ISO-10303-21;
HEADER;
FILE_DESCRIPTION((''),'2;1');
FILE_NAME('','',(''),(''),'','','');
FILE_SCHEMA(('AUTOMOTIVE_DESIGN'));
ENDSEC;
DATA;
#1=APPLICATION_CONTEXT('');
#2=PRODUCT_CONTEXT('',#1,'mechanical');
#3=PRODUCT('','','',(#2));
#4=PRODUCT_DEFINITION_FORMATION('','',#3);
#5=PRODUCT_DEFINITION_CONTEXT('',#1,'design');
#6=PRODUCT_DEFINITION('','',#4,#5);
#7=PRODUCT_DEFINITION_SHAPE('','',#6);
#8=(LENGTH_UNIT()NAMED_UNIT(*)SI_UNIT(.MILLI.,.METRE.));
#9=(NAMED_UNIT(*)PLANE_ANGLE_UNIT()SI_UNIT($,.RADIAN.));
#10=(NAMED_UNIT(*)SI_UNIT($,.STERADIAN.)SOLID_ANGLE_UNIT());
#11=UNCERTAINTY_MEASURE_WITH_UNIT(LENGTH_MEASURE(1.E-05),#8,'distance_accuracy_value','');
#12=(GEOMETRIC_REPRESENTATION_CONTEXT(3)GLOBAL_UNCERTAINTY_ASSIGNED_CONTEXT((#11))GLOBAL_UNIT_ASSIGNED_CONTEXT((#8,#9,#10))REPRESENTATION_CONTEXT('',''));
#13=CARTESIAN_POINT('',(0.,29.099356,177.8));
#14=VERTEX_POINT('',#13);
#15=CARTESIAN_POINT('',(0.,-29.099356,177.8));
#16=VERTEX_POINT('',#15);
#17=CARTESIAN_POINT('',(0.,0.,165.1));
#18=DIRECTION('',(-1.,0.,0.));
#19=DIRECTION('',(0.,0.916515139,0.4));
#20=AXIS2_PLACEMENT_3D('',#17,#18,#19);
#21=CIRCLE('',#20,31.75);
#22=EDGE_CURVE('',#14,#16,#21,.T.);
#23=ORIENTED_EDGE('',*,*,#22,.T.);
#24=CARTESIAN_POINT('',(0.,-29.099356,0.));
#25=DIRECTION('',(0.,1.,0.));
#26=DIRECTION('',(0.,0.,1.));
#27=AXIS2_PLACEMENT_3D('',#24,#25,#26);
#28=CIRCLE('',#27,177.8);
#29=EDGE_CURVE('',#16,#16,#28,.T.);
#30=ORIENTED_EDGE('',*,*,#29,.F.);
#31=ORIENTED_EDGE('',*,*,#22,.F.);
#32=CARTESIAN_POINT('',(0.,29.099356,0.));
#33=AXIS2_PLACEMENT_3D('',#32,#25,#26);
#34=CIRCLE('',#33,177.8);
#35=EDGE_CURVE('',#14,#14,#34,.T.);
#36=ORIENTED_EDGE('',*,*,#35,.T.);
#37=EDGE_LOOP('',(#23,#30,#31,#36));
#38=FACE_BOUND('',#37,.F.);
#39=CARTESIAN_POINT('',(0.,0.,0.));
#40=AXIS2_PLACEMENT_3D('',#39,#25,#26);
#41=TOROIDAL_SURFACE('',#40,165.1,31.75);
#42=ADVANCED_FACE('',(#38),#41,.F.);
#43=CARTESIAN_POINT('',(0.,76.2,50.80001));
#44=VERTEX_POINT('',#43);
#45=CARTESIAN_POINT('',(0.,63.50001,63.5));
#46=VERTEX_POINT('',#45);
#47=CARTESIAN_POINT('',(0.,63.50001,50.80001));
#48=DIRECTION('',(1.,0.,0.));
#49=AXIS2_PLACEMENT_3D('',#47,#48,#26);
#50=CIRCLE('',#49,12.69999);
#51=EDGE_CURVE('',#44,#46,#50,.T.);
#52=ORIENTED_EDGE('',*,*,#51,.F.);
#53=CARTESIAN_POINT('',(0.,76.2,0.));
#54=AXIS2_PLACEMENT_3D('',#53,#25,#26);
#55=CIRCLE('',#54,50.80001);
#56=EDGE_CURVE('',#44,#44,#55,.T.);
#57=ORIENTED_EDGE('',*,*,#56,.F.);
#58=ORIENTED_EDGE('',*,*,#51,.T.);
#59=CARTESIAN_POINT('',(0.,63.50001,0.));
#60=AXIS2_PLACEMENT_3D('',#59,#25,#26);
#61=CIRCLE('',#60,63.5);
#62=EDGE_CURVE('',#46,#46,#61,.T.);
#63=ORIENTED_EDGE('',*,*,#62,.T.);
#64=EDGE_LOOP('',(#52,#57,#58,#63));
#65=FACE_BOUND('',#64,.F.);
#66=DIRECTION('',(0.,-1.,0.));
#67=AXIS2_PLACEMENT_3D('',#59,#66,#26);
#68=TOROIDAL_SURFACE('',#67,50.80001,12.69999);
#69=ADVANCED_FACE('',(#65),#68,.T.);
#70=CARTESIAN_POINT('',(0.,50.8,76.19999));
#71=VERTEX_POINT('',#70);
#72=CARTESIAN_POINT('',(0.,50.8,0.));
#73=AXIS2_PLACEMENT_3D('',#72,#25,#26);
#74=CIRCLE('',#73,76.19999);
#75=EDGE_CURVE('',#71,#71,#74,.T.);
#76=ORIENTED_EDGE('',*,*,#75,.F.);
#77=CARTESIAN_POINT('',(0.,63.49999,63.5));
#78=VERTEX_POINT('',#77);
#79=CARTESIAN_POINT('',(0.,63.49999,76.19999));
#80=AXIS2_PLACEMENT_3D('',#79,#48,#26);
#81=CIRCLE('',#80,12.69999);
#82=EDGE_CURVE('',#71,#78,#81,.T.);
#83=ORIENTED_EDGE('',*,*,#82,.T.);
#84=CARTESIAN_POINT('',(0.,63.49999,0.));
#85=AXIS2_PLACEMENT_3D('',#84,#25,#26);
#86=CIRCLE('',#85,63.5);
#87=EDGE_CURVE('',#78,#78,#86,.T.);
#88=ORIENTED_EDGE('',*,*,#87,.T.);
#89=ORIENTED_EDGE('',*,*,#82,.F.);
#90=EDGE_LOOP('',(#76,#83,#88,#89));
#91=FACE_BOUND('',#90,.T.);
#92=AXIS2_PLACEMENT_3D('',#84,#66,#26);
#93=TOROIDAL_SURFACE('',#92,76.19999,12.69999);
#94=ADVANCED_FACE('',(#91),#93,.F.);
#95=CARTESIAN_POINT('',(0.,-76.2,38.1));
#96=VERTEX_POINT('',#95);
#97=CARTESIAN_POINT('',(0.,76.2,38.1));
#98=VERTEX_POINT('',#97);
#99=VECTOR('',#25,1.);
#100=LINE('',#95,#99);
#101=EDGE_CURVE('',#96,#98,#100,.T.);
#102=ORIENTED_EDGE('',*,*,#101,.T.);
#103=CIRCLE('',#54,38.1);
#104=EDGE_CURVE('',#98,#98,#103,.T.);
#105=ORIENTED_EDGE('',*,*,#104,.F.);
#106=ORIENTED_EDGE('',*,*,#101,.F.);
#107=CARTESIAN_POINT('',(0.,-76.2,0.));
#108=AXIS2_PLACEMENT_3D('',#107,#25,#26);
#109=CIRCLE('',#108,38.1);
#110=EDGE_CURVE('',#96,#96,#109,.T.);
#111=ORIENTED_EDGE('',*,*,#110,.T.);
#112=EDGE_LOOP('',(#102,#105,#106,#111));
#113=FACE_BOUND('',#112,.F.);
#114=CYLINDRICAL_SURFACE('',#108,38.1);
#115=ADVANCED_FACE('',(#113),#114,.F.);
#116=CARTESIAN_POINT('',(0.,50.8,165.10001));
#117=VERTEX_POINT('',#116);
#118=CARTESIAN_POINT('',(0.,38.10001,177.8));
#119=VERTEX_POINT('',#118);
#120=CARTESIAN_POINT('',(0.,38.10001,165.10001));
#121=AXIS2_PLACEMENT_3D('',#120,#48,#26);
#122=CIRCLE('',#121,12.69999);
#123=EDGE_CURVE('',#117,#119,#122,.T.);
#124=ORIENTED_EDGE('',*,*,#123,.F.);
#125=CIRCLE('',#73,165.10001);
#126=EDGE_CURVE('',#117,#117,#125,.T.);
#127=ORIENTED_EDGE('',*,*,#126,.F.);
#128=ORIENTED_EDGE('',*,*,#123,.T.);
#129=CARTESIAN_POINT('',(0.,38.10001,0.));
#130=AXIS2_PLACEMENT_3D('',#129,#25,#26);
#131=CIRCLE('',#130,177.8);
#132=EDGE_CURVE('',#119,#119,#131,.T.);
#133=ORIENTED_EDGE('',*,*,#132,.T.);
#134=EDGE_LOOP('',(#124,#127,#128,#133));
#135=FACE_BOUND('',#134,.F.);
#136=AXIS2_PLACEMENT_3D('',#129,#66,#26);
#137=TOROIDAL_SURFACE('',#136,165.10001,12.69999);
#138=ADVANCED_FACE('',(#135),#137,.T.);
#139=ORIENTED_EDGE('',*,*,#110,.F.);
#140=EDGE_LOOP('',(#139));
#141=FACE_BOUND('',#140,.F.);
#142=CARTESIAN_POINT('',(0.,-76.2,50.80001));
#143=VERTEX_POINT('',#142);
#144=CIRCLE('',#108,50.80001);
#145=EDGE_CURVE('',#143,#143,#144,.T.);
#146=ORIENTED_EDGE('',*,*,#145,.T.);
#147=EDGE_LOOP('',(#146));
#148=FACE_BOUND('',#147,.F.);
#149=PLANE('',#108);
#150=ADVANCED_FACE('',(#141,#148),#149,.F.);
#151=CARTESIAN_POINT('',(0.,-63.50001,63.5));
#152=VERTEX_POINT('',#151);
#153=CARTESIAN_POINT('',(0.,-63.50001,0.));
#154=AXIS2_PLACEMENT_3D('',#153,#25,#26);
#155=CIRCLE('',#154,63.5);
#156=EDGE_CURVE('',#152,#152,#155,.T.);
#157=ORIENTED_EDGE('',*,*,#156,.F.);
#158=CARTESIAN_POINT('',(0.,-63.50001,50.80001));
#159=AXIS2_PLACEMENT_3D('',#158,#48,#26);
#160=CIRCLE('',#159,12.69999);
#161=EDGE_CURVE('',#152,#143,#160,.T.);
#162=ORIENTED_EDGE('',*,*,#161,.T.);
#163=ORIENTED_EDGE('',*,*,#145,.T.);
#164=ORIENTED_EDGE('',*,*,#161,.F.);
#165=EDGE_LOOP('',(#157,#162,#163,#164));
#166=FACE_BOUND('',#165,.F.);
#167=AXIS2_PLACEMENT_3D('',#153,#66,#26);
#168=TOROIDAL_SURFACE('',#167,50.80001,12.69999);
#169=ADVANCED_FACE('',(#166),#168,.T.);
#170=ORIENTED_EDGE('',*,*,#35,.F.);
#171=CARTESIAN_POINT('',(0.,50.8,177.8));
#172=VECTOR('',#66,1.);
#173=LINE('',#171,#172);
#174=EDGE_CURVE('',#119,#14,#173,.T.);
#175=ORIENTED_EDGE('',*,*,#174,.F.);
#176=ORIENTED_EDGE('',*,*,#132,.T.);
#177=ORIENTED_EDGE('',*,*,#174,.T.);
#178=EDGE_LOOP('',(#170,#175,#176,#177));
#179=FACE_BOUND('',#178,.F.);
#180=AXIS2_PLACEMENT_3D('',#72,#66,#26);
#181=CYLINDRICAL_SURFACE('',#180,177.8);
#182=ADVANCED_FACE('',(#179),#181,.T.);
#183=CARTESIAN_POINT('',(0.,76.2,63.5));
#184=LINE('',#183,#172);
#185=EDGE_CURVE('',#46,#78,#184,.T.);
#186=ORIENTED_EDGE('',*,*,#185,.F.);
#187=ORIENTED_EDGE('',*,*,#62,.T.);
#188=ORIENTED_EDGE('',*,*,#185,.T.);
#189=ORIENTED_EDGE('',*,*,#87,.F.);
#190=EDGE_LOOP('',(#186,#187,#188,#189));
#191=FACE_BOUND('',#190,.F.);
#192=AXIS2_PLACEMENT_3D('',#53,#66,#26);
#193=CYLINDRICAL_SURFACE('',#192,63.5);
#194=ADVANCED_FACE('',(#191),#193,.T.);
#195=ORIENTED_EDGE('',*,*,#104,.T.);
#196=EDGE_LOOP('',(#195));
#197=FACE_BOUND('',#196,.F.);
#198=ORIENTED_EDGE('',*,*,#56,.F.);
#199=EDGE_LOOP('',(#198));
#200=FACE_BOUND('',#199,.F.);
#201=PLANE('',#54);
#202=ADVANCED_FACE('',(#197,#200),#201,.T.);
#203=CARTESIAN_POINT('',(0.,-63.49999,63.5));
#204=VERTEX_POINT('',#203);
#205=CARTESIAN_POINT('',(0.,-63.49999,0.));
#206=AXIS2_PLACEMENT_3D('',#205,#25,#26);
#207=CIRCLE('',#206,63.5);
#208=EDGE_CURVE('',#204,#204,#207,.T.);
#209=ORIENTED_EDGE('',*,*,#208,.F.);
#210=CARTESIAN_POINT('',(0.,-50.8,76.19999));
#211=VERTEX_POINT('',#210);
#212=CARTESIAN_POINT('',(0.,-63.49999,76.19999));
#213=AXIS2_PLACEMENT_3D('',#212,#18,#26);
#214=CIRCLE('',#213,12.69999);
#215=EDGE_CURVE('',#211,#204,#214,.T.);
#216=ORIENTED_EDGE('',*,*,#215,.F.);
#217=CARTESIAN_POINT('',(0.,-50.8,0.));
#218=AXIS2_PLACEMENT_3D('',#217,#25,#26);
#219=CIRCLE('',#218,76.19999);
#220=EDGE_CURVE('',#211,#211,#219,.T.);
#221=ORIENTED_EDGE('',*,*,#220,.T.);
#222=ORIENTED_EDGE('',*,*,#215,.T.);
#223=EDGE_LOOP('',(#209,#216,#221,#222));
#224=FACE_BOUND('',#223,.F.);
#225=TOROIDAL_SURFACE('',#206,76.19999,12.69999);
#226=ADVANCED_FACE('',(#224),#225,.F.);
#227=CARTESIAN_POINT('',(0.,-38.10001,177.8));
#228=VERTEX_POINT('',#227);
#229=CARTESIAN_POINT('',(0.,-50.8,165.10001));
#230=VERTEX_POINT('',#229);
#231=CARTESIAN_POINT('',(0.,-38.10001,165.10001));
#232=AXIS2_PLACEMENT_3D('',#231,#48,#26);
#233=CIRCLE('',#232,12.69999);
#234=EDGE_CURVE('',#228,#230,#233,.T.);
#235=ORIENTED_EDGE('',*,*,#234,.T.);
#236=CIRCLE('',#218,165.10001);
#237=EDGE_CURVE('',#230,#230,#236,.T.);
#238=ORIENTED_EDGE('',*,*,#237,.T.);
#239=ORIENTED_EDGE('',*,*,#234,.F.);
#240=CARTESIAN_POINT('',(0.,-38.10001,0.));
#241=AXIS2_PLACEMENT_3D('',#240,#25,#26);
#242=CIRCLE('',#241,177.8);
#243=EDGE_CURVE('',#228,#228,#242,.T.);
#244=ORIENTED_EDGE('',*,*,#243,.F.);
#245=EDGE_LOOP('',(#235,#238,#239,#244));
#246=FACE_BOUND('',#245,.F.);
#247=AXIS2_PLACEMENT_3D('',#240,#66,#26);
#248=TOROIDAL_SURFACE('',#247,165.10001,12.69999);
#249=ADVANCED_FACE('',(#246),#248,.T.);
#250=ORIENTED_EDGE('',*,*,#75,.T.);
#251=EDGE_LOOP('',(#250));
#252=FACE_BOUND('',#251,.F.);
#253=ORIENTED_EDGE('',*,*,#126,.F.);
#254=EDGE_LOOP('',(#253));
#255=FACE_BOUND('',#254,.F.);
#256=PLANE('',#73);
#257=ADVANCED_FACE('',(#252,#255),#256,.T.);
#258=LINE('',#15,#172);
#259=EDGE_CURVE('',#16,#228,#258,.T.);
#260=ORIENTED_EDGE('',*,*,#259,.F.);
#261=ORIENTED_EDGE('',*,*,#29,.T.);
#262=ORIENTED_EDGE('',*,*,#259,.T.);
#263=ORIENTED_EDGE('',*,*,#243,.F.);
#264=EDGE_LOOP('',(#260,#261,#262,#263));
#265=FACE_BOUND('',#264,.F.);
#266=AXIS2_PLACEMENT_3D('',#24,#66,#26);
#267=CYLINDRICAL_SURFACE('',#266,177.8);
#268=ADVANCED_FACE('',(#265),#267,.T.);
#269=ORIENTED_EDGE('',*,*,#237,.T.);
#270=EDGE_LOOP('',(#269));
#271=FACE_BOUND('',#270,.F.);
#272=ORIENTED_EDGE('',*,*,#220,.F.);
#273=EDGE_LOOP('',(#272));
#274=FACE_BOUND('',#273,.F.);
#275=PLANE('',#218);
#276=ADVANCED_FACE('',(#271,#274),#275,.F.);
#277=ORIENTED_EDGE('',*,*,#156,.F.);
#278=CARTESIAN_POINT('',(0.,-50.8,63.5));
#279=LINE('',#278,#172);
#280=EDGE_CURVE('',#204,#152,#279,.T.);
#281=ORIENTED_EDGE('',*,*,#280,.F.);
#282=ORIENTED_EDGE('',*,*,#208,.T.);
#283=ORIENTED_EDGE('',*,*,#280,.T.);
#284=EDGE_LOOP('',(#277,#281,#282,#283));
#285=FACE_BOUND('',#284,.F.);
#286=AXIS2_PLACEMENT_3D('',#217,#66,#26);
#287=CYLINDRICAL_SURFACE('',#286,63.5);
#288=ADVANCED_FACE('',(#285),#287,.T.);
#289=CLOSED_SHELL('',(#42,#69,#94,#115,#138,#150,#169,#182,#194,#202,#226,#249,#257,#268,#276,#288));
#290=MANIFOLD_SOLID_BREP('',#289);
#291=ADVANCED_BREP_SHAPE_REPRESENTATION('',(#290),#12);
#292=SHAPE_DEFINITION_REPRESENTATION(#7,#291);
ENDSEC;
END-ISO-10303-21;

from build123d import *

# Parameters (mm, degrees)
F2_R = 12.69999


# Not quite as in the source:
# - a fillet or chamfer is up to 0.001 mm smaller than in the source, because OpenCascade refuses the exact size


with BuildPart() as f1:
    # F0 (on Right) → F1 (revolve)
    with BuildSketch(Plane.YZ):
        with BuildLine():
            Line((-50.8, 63.5), (50.8, 63.5))
            Line((50.8, 63.5), (50.8, 177.8))
            Line((50.8, 177.8), (29.099355663, 177.8))
            ThreePointArc((29.099355663, 177.8), (0, 133.35), (-29.099355663, 177.8))
            Line((-29.099355663, 177.8), (-50.8, 177.8))
            Line((-50.8, 177.8), (-50.8, 63.5))
        make_face()
        Polygon((76.2, 38.1), (76.2, 63.5), (50.8, 63.5), (-50.8, 63.5), (-76.2, 63.5), (-76.2, 38.1), align=None)
    revolve(axis=Axis((0, 0, 0), (0, 1, 0)))

    # F2 (radius 12.7 in the source; OpenCascade refuses exactly that, so slightly less here)
    f2_edges = [f1.edges().sort_by_distance(p)[0] for p in [
        (0, -50.8, -177.8),
        (0, 50.8, -177.8),
        (0, -76.2, -63.5),
        (0, 76.2, -63.5),
        (0, -50.8, -63.5),
        (0, 50.8, -63.5),
    ]]
    fillet(f2_edges, radius=F2_R)


solid = f1.part
